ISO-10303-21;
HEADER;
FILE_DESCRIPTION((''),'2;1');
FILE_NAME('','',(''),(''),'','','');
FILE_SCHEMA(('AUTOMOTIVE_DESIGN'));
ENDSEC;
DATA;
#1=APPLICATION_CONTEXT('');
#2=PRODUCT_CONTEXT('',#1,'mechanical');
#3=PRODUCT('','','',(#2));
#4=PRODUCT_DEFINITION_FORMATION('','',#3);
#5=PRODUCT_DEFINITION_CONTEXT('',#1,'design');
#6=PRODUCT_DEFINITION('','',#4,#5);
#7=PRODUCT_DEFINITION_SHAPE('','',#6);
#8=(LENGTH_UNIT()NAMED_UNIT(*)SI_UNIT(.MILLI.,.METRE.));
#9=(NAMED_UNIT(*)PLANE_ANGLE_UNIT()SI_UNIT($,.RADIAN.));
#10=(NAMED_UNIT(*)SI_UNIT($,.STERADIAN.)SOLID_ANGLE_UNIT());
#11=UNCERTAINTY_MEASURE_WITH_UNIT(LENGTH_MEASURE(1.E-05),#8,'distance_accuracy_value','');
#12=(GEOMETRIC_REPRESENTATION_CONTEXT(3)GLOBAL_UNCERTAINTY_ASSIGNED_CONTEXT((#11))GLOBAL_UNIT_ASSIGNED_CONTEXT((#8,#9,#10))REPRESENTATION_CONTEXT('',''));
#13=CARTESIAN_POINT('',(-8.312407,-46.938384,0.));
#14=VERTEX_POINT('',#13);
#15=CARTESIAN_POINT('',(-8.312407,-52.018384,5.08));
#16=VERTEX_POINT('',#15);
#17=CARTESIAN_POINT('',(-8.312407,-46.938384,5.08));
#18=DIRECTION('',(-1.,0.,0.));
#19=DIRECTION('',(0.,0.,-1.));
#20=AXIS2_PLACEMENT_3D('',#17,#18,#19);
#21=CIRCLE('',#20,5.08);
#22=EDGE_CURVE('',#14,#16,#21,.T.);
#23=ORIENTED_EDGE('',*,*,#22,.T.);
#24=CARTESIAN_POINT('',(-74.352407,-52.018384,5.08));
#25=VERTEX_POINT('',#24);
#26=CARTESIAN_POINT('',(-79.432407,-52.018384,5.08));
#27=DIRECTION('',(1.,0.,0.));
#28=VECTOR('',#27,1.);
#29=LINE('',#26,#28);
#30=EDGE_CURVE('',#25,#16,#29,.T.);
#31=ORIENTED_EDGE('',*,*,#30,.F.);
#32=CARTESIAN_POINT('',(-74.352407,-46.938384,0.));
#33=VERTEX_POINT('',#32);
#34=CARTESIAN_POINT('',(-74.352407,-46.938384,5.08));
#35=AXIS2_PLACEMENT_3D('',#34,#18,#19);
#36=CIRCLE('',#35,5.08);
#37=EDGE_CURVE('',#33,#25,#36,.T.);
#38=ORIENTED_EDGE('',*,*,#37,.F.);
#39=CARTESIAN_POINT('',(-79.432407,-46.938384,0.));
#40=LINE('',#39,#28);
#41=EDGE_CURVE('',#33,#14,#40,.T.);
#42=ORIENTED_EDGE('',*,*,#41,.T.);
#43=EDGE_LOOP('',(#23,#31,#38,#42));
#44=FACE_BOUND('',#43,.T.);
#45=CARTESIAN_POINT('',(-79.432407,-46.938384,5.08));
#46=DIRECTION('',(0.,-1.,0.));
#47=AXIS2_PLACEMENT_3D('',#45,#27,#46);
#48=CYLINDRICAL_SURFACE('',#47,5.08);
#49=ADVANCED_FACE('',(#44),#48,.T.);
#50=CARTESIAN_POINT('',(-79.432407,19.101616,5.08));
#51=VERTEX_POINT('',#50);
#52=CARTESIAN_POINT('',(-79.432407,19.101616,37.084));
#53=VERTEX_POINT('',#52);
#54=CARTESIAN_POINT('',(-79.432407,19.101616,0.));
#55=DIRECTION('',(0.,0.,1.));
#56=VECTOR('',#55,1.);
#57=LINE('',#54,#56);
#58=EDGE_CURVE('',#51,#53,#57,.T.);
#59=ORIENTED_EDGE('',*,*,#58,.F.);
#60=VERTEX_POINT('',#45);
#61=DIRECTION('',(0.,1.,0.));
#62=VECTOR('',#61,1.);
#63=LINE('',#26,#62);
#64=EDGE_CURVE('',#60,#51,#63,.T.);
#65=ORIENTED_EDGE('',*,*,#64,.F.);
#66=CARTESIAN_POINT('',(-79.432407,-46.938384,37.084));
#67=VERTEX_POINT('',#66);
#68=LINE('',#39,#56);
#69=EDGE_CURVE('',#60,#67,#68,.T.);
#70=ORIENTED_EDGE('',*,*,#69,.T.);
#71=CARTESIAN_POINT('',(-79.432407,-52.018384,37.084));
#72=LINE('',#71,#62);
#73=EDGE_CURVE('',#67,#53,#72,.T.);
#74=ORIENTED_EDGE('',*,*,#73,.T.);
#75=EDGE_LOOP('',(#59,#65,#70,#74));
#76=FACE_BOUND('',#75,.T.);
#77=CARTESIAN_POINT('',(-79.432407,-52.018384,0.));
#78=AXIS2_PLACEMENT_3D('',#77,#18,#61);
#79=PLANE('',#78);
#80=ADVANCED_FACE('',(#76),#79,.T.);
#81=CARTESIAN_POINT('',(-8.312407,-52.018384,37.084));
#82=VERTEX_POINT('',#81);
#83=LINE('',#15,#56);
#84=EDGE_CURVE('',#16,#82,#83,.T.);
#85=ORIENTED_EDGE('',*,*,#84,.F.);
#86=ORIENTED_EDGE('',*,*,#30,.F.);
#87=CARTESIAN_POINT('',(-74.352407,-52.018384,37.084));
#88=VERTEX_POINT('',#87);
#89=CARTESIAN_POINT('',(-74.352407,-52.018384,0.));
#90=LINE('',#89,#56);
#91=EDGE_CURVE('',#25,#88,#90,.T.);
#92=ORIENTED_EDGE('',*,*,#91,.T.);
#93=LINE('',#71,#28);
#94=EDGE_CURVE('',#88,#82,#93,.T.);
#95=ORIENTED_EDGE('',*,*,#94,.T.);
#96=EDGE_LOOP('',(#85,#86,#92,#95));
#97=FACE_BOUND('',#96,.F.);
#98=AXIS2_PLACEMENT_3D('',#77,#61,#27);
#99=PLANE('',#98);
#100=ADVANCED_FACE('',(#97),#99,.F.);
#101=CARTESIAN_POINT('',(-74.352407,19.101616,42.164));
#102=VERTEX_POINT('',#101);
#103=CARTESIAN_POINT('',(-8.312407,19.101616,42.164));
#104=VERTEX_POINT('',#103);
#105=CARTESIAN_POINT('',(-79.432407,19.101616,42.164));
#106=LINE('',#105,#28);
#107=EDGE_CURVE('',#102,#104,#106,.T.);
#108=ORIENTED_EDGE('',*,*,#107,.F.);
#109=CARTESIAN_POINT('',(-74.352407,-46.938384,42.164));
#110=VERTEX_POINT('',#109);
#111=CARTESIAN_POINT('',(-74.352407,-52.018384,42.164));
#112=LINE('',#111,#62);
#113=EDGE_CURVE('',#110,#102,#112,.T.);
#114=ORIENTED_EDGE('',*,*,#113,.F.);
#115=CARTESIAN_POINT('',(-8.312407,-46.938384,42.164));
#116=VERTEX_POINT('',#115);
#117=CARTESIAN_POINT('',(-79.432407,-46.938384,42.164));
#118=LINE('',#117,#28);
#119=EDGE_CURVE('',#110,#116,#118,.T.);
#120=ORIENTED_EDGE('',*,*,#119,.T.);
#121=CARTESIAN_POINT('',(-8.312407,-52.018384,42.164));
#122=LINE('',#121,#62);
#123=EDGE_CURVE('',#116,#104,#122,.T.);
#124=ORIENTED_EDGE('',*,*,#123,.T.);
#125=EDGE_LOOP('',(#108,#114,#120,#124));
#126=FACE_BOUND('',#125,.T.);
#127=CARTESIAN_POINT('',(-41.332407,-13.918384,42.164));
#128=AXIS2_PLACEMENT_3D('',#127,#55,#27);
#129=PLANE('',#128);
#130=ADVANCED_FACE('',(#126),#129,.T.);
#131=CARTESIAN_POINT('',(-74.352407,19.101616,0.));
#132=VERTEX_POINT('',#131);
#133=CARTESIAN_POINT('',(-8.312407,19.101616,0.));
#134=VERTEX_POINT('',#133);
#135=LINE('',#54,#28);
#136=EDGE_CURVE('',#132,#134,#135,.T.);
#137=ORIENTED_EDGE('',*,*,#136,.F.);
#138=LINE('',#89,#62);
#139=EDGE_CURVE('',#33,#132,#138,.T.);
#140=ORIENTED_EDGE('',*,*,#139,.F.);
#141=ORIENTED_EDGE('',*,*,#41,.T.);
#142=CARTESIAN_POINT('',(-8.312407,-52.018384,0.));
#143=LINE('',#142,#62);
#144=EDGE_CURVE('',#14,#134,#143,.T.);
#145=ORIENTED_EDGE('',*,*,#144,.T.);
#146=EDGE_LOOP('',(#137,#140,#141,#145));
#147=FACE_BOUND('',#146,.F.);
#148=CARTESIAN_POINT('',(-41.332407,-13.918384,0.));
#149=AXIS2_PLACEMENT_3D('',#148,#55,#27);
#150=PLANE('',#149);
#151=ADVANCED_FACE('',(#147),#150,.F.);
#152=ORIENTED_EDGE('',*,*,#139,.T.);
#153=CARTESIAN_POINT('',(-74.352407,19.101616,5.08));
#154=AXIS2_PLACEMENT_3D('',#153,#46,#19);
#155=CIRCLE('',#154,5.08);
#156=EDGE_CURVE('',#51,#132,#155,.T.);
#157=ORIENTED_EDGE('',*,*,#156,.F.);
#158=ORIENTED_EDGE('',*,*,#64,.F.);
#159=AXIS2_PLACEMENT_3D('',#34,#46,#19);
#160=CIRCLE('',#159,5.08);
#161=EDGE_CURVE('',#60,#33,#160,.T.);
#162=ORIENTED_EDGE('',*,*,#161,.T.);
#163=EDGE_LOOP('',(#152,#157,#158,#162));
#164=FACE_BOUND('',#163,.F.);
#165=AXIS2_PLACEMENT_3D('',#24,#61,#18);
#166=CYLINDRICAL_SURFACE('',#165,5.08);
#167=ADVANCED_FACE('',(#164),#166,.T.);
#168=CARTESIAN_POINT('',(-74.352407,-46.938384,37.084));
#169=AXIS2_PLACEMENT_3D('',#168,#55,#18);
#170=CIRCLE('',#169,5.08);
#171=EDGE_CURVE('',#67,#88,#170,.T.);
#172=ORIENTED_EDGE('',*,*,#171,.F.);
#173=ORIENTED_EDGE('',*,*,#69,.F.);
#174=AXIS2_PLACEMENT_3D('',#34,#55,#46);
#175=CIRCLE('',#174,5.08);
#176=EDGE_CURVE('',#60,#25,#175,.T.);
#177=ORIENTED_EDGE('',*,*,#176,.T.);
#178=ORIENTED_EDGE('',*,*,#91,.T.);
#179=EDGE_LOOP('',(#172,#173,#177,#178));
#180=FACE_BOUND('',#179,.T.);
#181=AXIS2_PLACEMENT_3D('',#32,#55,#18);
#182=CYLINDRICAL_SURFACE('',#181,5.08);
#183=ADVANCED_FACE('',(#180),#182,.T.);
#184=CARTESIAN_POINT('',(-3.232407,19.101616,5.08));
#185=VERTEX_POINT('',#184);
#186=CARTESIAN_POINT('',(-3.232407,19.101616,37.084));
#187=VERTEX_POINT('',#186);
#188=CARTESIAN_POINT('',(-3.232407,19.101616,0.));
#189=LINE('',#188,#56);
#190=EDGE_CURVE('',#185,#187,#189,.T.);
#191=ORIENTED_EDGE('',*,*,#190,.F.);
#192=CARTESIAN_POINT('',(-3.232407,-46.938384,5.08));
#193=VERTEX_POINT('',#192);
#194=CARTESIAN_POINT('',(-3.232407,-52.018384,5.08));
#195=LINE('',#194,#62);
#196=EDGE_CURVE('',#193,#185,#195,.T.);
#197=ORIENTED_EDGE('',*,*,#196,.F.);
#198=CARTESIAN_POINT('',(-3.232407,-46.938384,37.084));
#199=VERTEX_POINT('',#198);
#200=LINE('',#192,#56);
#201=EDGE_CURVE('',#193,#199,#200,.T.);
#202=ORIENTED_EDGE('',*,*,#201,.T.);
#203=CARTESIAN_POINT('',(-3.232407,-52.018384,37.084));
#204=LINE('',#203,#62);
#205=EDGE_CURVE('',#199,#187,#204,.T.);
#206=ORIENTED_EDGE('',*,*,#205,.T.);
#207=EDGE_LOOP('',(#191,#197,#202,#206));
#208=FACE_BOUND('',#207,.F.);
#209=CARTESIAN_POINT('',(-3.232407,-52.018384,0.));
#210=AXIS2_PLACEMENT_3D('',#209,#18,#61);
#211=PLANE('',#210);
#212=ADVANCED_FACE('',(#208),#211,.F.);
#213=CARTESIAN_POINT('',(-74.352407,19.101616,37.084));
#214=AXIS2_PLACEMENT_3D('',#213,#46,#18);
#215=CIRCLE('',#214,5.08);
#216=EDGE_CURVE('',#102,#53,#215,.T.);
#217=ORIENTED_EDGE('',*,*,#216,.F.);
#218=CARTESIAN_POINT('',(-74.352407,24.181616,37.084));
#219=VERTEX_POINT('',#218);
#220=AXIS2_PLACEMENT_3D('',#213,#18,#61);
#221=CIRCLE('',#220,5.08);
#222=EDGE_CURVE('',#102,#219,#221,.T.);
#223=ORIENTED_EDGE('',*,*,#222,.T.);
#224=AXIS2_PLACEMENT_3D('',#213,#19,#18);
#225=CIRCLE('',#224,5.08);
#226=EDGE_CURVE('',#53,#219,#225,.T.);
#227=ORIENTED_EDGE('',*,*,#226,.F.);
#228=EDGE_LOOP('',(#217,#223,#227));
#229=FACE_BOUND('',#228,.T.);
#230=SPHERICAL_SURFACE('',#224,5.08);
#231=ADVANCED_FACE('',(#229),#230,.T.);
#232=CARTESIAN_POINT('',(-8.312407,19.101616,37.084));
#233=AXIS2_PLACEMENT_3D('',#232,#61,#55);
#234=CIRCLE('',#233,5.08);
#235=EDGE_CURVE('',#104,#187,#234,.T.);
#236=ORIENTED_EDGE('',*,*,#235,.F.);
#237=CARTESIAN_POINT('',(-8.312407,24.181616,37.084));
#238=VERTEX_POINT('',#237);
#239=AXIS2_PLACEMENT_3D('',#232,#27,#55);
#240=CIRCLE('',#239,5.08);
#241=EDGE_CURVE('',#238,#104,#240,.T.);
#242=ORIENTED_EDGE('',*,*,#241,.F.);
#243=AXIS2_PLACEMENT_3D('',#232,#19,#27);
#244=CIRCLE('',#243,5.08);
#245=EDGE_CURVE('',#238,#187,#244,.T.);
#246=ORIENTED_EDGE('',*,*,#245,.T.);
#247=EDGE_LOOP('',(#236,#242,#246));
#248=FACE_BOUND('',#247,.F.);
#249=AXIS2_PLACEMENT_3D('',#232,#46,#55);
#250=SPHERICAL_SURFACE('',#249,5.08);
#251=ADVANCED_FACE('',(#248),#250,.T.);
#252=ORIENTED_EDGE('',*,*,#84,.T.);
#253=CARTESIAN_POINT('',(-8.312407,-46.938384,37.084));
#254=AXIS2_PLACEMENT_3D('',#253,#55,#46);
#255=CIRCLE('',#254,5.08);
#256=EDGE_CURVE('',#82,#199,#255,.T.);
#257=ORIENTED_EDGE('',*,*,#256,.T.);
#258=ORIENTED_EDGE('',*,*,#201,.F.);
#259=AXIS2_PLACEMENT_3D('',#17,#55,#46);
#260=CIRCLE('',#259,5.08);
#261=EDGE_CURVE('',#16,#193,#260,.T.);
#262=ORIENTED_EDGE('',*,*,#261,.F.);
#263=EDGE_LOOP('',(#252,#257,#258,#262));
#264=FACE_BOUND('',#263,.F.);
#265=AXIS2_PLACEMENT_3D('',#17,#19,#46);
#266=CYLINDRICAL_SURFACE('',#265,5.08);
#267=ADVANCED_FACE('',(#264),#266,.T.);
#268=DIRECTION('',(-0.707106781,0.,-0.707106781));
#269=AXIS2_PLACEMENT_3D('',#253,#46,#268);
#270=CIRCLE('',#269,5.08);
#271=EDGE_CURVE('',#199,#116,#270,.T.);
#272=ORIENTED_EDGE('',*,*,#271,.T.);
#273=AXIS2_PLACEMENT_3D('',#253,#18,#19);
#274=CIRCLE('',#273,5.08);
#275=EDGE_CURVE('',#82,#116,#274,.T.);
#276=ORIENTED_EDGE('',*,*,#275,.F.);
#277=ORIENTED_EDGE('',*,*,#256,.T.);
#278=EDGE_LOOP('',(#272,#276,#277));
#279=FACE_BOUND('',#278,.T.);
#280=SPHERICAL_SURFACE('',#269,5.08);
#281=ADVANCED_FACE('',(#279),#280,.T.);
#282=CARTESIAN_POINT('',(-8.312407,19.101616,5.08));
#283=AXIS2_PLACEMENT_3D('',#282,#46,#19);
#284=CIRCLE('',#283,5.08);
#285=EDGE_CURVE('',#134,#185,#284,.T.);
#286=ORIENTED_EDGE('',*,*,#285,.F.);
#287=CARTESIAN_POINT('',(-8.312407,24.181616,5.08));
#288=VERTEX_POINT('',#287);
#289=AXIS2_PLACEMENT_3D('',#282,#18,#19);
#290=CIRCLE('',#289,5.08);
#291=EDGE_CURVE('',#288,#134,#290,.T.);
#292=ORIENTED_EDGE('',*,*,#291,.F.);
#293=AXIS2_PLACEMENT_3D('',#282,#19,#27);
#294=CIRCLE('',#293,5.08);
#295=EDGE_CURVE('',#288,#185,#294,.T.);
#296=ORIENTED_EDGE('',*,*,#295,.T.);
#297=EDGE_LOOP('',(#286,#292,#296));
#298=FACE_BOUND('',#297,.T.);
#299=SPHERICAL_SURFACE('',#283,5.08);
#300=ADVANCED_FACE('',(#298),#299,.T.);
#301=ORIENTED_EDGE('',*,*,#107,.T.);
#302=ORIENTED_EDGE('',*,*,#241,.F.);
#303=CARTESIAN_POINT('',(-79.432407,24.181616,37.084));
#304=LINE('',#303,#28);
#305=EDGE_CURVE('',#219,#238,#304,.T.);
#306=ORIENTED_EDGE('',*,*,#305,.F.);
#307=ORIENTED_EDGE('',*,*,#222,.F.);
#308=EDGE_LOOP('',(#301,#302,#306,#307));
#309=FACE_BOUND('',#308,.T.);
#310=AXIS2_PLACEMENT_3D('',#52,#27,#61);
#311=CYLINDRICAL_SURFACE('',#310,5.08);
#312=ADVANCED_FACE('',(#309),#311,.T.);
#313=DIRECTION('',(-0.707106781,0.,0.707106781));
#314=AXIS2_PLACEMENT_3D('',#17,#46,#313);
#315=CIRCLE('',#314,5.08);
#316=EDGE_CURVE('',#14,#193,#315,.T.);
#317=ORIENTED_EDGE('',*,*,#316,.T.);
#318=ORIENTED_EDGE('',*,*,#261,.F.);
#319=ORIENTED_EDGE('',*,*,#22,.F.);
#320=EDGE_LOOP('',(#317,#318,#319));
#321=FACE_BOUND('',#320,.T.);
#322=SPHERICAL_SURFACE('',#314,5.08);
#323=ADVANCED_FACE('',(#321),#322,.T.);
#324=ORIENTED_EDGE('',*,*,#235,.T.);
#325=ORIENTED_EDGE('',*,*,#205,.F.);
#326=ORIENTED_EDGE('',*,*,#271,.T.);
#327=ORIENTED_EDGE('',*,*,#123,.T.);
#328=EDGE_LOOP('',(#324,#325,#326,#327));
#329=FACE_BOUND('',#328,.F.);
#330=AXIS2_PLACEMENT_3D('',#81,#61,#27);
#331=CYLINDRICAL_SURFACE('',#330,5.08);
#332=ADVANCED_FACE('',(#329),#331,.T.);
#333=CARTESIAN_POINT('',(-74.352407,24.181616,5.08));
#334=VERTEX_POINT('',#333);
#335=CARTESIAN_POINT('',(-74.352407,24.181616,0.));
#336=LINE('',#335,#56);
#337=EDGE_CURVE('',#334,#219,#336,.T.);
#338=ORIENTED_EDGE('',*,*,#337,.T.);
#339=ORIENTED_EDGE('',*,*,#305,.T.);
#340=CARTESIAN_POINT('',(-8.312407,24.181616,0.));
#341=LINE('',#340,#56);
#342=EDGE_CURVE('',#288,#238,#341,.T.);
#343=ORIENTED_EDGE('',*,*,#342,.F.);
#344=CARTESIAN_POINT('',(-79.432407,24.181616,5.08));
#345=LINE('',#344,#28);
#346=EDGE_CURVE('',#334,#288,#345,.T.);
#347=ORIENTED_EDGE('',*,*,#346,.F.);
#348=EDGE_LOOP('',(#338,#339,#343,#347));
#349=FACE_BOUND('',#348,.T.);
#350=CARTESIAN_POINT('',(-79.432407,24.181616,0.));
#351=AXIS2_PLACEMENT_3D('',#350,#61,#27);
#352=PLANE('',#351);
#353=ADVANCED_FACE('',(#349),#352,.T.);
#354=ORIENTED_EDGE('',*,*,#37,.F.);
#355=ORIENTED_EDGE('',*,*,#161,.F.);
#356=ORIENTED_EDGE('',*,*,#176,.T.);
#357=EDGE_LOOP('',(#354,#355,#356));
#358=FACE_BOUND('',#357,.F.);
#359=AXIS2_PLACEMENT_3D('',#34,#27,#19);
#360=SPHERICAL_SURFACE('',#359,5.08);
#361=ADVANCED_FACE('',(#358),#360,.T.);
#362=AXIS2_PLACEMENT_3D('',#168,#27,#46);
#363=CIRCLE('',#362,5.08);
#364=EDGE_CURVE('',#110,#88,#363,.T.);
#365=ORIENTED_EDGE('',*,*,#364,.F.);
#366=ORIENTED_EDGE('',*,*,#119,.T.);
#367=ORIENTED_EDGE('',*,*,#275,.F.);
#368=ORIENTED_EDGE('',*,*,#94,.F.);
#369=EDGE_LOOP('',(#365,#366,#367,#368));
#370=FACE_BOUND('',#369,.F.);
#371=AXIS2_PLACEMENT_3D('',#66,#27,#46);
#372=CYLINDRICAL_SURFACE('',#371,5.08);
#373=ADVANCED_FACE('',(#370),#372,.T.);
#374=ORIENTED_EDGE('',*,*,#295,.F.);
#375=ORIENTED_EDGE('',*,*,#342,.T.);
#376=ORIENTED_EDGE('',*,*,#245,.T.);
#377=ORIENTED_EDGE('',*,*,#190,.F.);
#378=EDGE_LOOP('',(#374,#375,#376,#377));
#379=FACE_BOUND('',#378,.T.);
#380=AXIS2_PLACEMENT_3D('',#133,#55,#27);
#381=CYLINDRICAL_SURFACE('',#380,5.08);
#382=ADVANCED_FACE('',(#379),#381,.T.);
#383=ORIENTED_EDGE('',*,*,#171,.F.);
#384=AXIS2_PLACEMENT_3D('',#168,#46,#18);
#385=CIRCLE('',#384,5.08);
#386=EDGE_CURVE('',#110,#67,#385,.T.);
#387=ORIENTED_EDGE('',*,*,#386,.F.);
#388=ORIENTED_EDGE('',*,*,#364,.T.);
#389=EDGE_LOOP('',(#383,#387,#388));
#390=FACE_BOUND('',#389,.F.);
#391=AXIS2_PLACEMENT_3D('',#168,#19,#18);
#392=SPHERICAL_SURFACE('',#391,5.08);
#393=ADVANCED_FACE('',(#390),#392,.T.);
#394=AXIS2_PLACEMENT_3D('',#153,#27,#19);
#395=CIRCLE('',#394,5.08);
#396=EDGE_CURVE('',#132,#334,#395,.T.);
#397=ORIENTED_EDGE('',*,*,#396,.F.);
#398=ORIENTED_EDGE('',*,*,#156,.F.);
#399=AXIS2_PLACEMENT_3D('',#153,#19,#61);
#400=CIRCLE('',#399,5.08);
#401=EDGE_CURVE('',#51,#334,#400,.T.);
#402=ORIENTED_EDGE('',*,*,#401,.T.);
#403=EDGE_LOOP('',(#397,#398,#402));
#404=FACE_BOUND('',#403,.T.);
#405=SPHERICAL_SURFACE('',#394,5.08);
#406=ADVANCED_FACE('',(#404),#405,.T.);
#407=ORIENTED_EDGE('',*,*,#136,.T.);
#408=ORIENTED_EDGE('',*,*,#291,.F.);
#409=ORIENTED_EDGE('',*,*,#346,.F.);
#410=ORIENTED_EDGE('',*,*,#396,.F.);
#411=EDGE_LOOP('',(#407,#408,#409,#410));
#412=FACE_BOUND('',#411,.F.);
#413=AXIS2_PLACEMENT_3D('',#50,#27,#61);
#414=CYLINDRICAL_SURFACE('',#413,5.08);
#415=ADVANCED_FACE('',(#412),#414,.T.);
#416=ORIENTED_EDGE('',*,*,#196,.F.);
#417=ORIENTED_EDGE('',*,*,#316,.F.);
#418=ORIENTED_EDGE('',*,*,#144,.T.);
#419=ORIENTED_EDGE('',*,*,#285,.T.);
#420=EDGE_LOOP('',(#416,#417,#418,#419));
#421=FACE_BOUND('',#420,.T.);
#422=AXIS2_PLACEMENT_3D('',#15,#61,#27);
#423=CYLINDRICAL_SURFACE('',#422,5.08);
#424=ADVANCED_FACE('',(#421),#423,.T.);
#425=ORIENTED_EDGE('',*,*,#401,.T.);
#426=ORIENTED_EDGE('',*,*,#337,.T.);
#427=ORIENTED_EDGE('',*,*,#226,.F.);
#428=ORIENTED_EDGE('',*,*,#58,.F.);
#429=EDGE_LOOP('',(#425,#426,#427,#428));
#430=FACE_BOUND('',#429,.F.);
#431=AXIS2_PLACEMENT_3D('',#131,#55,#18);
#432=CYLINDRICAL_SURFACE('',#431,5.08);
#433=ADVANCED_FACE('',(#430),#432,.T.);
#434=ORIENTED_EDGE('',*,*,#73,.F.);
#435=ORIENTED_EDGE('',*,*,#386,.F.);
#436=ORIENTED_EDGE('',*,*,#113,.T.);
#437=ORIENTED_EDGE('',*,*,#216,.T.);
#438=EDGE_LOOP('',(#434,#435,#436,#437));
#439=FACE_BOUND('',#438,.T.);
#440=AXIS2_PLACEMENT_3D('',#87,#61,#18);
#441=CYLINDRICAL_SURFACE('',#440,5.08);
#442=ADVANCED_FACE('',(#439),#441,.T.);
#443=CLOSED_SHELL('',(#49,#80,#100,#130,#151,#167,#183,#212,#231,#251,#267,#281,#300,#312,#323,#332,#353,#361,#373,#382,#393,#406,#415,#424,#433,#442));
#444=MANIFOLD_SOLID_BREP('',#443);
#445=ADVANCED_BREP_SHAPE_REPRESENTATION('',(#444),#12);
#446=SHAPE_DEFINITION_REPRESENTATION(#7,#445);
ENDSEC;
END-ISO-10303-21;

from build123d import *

# Parameters (mm, degrees)
F0_W         = 76.2
F0_H         = 76.2
F0_W_2       = 3.4224579499
F0_H_2       = 7.5862997554
F1_DEPTH     = 42.164
F2_R         = 5.08
F3_T1_DEPTH  = 32.004
F3_S5_W      = 5.08
F3_S5_H      = 5.08
F3_T6_DEPTH  = 5.08
F3_S11_W     = 5.08
F3_S11_H     = 5.08
F3_T12_DEPTH = 5.08


# Not quite as in the source:
# - a fillet or chamfer that OpenCascade refuses, or shapes differently, is made with other operations: its cross-section is extruded or revolved along the edge and cut away or added


with BuildPart() as f1:
    # F0 (on Top) → F1 (new body)
    with BuildSketch(Plane.XY):
        with Locations((-41.3324069232, -13.9183843632)):
            Rectangle(F0_W, F0_H)
        with Locations((-63.0685785115, -38.5174307738)):
            Rectangle(F0_W_2, F0_H_2, mode=Mode.SUBTRACT)
        with Locations((-63.0685785115, -38.5174307738)):
            Rectangle(F0_W_2, F0_H_2)
    extrude(amount=F1_DEPTH)

    # F2
    f2_edges = [f1.edges().sort_by_distance(p)[0] for p in [
        (-41.332407, -52.018384, 0),
        (-3.232407, -13.918384, 0),
        (-41.332407, 24.181616, 0),
        (-79.432407, -13.918384, 0),
        (-79.432407, 24.181616, 21.082),
        (-79.432407, -52.018384, 21.082),
        (-79.432407, -13.918384, 42.164),
        (-41.332407, -52.018384, 42.164),
        (-3.232407, -13.918384, 42.164),
        (-41.332407, 24.181616, 42.164),
        (-3.232407, 24.181616, 21.082),
    ]]
    fillet(f2_edges, radius=F2_R)

    # F3: fillet of radius 5.08 on 1 edges, made by hand

    # F3_s2 → F3_t1 (cut)
    with BuildSketch(Plane.XY.offset(5.08)):
        with BuildLine():
            ThreePointArc((-8.3124069232, -52.0183843632), (-4.7203044747, -50.5304868116), (-3.2324069232, -46.9383843632))
            Line((-3.2324069232, -46.9383843632), (-3.2324069232, -52.0183843632))
            Line((-3.2324069232, -52.0183843632), (-8.3124069232, -52.0183843632))
        make_face()
    extrude(amount=F3_T1_DEPTH, mode=Mode.SUBTRACT)


with BuildPart() as f3_tool4:
    # F3_s5 → F3_t6 (new body)
    with BuildSketch(Plane.XZ.offset(46.9383843632)):
        with Locations((-5.7724069232, 2.54)):
            Rectangle(F3_S5_W, F3_S5_H)
    extrude(amount=F3_T6_DEPTH)

    # F3_s7 → F3_t8 (revolve, cut)
    with BuildSketch(Plane(origin=(-8.3124069232, -46.9383843632, 5.08), x_dir=(-0.7071067812, 0, 0.7071067812), z_dir=(0.7071067812, 0, 0.7071067812))):
        with BuildLine():
            ThreePointArc((0, -5.08), (5.08, 0), (0, 5.08))
            Line((0, 5.08), (0, -5.08))
        make_face()
    revolve(axis=Axis((-8.3124069232, -46.9383843632, 5.08), (0, -1, 0)), mode=Mode.SUBTRACT)


with BuildPart() as f1_1:
    add(f1.part)

    # F3_t3: cut F3_tool4
    add(f3_tool4.part, mode=Mode.SUBTRACT)


with BuildPart() as f3_tool10:
    # F3_s11 → F3_t12 (new body)
    with BuildSketch(Plane.XZ.offset(46.9383843632)):
        with Locations((-5.7724069232, 39.624)):
            Rectangle(F3_S11_W, F3_S11_H)
    extrude(amount=F3_T12_DEPTH)

    # F3_s13 → F3_t14 (revolve, cut)
    with BuildSketch(Plane(origin=(-8.3124069232, -46.9383843632, 37.084), x_dir=(-0.7071067812, 0, -0.7071067812), z_dir=(-0.7071067812, 0, 0.7071067812))):
        with BuildLine():
            ThreePointArc((0, -5.08), (5.08, 0), (0, 5.08))
            Line((0, 5.08), (0, -5.08))
        make_face()
    revolve(axis=Axis((-8.3124069232, -46.9383843632, 37.084), (0, -1, 0)), mode=Mode.SUBTRACT)


with BuildPart() as f1_2:
    add(f1_1.part)

    # F3_t9: cut F3_tool10
    add(f3_tool10.part, mode=Mode.SUBTRACT)


solid = f1_2.part
